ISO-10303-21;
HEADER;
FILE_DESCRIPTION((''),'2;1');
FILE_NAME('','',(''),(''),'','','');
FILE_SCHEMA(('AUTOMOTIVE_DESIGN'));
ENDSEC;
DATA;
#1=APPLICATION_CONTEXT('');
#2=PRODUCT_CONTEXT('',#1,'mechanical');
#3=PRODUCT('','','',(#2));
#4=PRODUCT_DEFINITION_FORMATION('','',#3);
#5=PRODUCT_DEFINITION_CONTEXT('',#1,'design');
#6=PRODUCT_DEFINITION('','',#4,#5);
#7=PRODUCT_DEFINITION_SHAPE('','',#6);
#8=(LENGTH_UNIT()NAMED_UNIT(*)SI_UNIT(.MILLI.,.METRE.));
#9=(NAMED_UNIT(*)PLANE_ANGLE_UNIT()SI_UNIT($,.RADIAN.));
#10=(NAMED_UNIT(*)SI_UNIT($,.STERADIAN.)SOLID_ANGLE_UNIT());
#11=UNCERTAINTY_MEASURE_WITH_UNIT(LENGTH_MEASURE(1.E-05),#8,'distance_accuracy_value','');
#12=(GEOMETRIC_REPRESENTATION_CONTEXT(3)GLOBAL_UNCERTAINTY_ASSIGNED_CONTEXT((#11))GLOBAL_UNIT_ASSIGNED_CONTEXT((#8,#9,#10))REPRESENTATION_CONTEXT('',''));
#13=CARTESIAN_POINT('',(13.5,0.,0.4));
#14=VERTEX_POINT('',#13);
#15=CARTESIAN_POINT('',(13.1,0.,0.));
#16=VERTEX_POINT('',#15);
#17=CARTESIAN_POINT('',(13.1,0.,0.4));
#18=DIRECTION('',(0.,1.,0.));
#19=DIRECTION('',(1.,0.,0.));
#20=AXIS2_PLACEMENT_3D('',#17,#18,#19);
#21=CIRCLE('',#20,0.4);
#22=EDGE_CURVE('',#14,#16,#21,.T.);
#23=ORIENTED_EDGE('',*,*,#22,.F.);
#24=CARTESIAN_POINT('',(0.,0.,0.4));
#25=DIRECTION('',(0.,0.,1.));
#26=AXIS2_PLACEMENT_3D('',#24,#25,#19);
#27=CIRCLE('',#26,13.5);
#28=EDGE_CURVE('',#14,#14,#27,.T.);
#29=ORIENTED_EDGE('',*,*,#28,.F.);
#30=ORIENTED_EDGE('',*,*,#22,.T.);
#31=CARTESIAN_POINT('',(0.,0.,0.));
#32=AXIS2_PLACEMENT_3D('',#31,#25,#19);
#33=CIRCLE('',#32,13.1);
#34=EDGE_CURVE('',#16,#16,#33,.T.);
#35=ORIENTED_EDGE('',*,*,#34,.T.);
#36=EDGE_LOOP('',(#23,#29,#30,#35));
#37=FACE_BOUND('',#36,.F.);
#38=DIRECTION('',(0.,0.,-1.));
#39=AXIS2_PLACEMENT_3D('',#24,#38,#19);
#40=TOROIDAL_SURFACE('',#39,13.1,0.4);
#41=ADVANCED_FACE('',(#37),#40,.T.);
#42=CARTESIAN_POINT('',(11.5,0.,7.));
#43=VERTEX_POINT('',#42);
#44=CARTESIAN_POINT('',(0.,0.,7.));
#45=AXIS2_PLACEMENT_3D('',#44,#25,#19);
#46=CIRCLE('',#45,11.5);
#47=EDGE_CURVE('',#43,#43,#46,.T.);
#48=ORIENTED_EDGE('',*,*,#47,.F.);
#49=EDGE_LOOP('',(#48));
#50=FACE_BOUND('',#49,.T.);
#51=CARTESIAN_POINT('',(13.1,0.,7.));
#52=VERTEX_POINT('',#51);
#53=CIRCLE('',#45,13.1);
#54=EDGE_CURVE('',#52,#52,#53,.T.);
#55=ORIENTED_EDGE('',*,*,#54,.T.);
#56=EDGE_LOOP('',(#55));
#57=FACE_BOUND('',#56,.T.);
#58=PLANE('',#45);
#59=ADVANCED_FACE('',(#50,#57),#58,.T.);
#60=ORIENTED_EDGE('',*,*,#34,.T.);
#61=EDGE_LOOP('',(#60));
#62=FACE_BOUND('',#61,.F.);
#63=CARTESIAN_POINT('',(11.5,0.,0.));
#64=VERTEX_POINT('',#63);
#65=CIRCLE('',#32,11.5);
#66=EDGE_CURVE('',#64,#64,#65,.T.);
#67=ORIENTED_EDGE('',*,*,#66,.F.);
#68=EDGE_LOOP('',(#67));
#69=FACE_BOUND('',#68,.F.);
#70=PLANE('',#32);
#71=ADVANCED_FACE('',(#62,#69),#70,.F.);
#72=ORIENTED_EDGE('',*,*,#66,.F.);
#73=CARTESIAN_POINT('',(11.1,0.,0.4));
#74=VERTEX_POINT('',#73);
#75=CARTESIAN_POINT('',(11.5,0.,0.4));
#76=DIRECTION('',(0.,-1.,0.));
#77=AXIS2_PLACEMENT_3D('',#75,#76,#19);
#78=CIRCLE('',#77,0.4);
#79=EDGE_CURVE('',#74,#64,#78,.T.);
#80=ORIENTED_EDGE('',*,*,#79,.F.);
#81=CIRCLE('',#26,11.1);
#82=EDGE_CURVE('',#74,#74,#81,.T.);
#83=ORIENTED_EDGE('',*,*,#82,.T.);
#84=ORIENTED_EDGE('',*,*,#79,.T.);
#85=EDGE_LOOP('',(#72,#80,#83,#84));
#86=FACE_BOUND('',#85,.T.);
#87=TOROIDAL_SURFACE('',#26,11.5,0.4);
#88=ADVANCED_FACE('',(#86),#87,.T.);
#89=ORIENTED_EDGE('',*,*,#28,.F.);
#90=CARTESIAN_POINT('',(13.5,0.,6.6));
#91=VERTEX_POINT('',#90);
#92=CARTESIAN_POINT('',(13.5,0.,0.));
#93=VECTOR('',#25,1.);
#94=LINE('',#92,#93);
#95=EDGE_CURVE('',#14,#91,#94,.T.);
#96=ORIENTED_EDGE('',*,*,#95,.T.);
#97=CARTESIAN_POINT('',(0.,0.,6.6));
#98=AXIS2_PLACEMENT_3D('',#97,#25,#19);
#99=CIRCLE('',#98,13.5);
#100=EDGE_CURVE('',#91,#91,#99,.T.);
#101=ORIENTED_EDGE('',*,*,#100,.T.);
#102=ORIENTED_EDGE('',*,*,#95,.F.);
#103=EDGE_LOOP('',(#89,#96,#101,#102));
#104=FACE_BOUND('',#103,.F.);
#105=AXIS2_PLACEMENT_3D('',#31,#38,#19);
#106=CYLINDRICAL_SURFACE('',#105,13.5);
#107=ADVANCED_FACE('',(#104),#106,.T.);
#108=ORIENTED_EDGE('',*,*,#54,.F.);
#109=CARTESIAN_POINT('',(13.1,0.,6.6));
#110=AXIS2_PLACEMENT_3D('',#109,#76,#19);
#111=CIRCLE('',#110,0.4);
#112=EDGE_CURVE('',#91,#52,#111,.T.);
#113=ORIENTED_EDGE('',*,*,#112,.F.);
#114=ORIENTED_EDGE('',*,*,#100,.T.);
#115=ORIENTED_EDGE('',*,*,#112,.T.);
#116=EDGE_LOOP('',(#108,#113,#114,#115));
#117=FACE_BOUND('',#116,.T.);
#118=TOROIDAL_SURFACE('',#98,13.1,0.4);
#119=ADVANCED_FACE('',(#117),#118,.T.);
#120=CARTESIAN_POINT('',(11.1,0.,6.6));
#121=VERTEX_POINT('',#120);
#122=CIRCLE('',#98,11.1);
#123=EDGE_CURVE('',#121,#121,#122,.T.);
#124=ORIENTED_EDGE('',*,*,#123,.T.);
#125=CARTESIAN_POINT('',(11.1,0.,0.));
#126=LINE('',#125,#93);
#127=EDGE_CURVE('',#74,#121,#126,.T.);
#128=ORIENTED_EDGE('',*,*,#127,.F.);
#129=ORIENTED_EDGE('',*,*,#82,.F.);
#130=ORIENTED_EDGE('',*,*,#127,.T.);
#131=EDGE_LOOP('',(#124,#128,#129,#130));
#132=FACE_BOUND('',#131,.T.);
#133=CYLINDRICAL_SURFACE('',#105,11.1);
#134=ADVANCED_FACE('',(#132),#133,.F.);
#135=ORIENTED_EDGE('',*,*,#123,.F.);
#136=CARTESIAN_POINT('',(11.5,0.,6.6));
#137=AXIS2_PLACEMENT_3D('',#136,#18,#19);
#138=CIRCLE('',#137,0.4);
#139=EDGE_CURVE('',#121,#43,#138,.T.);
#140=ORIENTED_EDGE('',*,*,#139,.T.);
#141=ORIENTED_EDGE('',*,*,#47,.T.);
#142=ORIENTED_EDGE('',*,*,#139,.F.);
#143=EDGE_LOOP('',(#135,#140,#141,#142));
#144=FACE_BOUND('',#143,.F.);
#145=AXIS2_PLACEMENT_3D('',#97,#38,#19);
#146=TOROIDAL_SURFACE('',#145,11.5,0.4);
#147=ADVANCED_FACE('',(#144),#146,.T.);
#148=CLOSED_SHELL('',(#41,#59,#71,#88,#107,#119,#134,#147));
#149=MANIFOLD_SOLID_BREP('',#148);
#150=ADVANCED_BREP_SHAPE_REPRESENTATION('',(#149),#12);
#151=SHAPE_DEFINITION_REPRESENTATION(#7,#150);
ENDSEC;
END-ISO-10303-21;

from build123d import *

# Parameters (mm, degrees)
F0_R     = 13.5
F0_R_2   = 11.1
F1_DEPTH = 7
F2_R     = 0.4


# Not quite as in the source:
# - a feature names something its author has since deleted; it is built from what else it names


with BuildPart() as f1:
    # F0 (on Top) → F1 (new body)
    with BuildSketch(Plane.XY):
        Circle(F0_R)
        Circle(F0_R_2, mode=Mode.SUBTRACT)
    extrude(amount=F1_DEPTH)

    # F2
    f2_edges = [f1.edges().sort_by_distance(p)[0] for p in [
        (-11.1, 0, 7),
        (-13.5, 0, 7),
        (-13.5, 0, 0),
        (-11.1, 0, 0),
    ]]
    fillet(f2_edges, radius=F2_R)


solid = f1.part
